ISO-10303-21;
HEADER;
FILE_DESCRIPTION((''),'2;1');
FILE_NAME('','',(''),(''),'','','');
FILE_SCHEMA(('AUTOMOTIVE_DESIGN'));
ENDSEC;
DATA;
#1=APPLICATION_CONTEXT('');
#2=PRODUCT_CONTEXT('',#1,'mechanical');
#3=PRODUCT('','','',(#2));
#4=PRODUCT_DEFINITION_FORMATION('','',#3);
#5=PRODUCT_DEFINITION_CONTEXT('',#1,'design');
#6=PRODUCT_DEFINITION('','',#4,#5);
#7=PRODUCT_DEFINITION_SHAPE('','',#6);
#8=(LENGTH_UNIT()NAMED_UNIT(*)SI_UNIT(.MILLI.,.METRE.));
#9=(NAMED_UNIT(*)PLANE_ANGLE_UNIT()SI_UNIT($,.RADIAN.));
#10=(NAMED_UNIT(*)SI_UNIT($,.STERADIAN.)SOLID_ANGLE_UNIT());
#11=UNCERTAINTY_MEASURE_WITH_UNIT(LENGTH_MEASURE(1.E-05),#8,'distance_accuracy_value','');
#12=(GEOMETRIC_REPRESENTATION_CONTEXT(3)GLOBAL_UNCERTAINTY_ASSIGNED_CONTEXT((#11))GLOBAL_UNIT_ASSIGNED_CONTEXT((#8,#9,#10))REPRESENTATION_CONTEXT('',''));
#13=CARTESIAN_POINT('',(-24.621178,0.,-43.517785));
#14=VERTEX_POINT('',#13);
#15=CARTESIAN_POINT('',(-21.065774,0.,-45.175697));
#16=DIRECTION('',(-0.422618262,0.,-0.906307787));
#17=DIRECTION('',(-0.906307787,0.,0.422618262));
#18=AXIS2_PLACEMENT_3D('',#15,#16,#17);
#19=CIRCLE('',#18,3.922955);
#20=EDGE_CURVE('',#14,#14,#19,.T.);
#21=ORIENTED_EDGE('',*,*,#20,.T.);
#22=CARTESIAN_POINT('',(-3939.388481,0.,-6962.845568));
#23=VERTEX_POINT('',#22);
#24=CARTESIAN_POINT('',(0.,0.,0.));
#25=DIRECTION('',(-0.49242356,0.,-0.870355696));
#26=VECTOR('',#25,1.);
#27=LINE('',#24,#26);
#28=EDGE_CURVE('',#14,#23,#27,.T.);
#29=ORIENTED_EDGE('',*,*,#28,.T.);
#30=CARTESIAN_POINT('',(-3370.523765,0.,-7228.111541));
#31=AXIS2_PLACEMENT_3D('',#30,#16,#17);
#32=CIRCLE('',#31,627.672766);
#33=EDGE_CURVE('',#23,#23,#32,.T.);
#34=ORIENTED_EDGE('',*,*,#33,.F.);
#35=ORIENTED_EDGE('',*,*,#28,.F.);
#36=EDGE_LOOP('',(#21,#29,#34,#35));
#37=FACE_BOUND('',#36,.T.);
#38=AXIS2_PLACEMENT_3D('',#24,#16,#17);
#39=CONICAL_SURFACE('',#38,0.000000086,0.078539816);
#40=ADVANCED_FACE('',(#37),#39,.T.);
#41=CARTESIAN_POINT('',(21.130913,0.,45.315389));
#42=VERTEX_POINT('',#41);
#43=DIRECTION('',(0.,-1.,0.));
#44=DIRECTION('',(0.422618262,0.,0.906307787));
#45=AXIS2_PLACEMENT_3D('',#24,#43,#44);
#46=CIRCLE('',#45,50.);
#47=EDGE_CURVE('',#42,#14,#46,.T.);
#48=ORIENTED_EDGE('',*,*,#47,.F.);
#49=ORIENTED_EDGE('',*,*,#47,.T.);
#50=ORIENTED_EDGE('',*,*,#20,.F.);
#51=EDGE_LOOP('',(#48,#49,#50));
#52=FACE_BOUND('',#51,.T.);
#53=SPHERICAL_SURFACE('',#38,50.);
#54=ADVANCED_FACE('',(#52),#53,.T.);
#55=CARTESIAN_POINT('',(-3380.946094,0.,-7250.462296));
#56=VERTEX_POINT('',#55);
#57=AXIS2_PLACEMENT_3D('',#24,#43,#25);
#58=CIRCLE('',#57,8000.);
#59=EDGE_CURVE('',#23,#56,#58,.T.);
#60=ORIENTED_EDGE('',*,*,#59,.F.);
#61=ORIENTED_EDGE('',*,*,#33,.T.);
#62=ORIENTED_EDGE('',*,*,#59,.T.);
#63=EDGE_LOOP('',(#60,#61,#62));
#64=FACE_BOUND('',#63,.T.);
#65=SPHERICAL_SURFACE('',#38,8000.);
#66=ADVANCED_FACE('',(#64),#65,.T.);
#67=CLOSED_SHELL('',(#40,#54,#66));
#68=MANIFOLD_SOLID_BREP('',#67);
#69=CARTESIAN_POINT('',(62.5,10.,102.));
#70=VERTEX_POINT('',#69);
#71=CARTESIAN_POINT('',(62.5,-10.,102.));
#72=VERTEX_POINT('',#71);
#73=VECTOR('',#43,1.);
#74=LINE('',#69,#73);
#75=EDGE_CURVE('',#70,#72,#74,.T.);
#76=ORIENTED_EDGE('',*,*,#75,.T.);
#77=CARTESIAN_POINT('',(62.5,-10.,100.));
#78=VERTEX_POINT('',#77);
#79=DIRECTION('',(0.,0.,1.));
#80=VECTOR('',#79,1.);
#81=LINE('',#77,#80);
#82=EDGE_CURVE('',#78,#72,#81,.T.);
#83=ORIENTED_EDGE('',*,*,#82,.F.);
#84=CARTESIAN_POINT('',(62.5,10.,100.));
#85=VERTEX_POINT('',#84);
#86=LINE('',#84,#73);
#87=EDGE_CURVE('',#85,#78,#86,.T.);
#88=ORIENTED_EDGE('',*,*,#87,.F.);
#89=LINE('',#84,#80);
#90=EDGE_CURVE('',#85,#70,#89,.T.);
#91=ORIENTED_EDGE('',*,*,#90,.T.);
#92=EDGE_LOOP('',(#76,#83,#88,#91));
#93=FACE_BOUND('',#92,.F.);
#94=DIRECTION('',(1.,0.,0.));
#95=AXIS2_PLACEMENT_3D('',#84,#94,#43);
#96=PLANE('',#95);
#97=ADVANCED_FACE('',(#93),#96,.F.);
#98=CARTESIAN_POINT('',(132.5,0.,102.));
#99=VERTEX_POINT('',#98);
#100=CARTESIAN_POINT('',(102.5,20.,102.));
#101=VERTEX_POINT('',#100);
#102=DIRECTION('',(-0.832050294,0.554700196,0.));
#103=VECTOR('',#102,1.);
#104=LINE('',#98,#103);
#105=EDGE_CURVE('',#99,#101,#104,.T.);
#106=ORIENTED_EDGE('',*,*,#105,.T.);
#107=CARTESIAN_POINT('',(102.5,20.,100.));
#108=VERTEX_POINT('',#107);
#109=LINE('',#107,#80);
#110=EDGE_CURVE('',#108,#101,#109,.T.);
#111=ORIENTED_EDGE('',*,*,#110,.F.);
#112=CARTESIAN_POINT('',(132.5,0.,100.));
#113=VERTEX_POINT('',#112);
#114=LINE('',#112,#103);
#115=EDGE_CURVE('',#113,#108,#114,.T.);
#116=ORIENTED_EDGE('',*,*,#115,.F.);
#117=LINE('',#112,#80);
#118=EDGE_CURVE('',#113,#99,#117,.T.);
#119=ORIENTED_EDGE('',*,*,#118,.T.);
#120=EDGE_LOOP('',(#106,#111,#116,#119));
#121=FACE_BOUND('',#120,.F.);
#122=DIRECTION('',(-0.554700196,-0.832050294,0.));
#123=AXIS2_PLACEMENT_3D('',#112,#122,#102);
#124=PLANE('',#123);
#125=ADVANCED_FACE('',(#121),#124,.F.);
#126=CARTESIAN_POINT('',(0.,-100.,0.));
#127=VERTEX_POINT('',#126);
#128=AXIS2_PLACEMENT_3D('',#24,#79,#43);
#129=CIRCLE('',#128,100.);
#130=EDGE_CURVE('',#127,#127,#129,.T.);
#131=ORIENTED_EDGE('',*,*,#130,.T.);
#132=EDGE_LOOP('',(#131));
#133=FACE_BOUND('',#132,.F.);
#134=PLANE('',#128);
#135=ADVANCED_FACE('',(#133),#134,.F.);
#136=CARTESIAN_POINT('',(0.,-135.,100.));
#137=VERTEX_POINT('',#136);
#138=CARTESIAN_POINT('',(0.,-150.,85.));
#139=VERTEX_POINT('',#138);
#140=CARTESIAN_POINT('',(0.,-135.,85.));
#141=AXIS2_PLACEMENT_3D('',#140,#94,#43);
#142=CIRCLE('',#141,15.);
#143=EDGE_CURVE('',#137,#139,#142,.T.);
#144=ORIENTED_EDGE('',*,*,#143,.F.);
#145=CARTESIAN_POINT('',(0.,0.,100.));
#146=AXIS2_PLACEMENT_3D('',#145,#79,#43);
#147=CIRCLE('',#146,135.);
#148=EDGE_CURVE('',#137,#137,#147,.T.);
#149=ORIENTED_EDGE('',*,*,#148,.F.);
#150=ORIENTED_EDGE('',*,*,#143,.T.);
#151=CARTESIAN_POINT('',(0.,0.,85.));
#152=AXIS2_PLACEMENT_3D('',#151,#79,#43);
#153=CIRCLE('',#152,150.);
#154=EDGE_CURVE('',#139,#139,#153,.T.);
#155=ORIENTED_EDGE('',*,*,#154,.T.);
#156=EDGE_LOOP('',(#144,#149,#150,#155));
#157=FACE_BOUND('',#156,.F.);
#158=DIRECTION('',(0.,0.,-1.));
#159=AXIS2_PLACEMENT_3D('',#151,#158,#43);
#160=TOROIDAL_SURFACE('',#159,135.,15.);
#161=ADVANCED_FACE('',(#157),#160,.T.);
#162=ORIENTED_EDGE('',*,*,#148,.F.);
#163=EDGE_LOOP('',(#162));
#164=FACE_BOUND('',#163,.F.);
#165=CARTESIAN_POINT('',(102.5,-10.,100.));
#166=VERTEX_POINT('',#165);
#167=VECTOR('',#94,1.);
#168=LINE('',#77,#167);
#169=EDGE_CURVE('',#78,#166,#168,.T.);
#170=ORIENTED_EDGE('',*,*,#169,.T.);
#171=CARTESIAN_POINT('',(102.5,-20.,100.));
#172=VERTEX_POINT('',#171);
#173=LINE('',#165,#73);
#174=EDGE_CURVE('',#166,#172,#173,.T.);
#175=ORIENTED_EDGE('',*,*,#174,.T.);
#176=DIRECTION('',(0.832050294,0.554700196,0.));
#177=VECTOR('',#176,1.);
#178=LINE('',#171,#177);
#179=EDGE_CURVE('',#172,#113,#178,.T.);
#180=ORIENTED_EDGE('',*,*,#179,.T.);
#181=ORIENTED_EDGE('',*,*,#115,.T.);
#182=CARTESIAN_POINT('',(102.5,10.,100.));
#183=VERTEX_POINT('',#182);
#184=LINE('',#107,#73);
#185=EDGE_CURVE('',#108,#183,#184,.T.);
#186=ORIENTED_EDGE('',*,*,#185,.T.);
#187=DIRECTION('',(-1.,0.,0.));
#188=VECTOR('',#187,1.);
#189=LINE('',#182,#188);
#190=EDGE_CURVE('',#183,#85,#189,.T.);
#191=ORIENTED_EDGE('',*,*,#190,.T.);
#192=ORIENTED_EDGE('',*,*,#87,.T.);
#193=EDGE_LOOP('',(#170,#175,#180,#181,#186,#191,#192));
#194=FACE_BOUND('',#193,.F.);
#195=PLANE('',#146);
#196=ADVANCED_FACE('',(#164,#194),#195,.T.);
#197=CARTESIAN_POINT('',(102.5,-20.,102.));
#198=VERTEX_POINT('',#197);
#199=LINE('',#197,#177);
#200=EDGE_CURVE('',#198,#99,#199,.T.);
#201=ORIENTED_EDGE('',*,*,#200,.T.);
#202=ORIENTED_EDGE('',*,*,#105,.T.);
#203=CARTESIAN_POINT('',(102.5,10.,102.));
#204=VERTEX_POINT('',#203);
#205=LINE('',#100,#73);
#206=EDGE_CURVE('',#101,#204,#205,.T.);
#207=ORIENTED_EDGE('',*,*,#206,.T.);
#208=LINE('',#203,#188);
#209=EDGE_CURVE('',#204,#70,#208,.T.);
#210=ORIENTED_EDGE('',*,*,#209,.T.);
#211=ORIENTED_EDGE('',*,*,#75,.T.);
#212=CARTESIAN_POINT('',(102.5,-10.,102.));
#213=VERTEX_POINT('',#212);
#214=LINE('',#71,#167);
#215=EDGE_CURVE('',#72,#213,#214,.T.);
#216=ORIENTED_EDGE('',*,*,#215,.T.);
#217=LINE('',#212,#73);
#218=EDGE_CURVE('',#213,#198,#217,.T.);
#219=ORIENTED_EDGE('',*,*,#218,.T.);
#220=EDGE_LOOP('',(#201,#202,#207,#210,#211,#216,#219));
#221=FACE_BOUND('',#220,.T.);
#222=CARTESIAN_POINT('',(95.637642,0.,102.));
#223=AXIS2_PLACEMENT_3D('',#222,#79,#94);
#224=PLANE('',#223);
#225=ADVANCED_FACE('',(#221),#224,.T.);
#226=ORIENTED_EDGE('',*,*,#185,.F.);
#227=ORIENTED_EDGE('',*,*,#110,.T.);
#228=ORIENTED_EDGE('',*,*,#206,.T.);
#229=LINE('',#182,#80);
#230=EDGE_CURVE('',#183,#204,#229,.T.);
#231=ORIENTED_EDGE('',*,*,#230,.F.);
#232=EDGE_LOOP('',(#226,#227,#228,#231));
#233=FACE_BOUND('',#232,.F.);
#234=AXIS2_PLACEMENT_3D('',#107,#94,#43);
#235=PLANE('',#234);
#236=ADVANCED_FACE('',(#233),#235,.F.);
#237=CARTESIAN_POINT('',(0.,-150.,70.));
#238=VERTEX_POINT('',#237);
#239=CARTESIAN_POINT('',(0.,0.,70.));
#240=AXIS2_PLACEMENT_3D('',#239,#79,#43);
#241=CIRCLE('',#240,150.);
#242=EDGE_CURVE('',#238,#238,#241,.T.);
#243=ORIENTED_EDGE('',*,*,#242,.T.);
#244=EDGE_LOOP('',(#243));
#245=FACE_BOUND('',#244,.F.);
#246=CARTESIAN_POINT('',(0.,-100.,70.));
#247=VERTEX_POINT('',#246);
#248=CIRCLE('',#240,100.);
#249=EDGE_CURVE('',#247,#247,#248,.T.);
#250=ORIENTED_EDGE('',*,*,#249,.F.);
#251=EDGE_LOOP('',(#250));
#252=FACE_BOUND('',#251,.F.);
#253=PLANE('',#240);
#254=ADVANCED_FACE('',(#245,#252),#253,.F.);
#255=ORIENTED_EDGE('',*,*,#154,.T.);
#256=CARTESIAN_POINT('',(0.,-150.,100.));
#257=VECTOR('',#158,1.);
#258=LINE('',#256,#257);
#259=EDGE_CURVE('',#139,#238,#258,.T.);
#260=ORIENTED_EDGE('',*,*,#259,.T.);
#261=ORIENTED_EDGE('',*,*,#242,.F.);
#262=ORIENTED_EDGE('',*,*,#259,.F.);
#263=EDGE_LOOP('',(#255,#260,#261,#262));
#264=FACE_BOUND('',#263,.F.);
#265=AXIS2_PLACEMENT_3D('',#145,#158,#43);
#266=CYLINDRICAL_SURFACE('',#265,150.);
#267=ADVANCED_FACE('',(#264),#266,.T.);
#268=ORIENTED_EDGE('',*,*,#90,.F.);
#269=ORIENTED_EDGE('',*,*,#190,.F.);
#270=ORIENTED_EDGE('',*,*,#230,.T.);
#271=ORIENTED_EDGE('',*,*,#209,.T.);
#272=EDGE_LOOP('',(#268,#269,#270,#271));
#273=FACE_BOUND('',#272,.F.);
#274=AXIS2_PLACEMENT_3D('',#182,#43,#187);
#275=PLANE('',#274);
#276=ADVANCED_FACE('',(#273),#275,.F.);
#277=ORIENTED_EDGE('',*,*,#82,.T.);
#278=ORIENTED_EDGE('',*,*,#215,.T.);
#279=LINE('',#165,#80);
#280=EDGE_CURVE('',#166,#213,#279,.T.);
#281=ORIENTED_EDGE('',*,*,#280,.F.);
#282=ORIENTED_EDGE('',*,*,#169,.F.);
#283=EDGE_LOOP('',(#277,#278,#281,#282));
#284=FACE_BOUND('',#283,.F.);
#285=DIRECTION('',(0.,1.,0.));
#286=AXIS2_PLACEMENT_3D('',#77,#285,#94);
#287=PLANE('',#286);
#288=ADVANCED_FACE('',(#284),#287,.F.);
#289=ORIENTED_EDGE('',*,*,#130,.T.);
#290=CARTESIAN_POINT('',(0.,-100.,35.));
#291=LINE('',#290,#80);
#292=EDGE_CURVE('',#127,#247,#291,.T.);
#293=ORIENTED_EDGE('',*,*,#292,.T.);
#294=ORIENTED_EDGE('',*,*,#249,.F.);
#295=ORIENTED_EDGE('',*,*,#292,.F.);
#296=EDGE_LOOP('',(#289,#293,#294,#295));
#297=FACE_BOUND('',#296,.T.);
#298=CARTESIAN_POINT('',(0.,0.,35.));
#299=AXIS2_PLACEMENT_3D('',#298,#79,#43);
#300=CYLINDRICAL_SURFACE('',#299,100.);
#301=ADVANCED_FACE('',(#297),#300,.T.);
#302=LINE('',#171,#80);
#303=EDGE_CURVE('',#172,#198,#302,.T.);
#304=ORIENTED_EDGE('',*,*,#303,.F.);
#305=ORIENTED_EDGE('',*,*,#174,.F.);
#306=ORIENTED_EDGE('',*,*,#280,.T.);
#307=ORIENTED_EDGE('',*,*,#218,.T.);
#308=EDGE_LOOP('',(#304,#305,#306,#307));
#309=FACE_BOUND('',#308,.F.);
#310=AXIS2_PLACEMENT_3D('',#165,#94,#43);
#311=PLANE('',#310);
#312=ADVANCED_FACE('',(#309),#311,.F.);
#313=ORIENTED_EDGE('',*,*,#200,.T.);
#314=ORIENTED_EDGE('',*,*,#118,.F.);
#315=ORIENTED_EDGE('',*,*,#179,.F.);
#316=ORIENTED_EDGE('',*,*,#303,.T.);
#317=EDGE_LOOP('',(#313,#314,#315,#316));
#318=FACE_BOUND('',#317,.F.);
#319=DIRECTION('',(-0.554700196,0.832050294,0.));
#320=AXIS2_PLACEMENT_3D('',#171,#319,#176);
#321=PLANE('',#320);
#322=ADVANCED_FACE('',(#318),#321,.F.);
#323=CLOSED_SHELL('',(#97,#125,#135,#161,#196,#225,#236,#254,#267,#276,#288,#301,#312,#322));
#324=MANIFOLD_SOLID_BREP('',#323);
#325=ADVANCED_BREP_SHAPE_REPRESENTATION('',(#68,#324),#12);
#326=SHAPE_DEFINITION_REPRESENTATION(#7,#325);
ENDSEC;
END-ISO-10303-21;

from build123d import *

# Parameters (mm, degrees)
F2_W     = 100
F2_H     = 70
F4_R     = 15
F7_DEPTH = 2


# Not quite as in the source:
# - a feature names something its author has since deleted; it is built from what else it names


with BuildPart() as f1:
    # F0 (on Front) → F1 (revolve)
    with BuildSketch(Plane.XZ):
        with BuildLine():
            Line((-3380.9460939256, -7250.4622962932), (0, 0))
            Line((0, 0), (-24.6211780052, -43.517784797))
            Line((-24.6211780052, -43.517784797), (-1969.6942404139, -3481.4227837596))
            Line((-1969.6942404139, -3481.4227837596), (-2462.1178005173, -4351.7784796995))
            Line((-2462.1178005173, -4351.7784796995), (-3446.9649207243, -6092.4898715793))
            Line((-3446.9649207243, -6092.4898715793), (-3939.3884808277, -6962.8455675192))
            ThreePointArc((-3939.3884808277, -6962.8455675192), (-3662.9913209357, -7112.1371318859), (-3380.9460939256, -7250.4622962932))
        make_face()
        with BuildLine():
            Line((-24.6211780052, -43.517784797), (0, 0))
            Line((0, 0), (21.130913087, 45.3153893518))
            ThreePointArc((21.130913087, 45.3153893518), (-44.4508570743, 22.8936957558), (-24.6211780052, -43.517784797))
        make_face()
    revolve(axis=Axis((-1690.4730469628, 0, -3625.2311481466), (-0.4226182617, 0, -0.906307787)))


with BuildPart() as f3:
    # F2 (on Right) → F3 (revolve)
    with BuildSketch(Plane.YZ):
        with Locations((-50, 35)):
            Rectangle(F2_W, F2_H)
        Polygon((-100, 70), (0, 70), (0, 100), (-150, 100), (-150, 70), align=None)
    revolve(axis=Axis((0, 0, 35), (0, 0, 1)))

    # F4
    f4_edges = [f3.edges().sort_by_distance(p)[0] for p in [
        (0, 150, 100),
    ]]
    fillet(f4_edges, radius=F4_R)

    # F6 (on offset) → F7 (join)
    with BuildSketch(Plane.XY.offset(100)):
        Polygon((102.5, -20), (132.5, 0), (102.5, 20), (102.5, 10), (62.5, 10), (62.5, 0), (62.5, -10), (102.5, -10), align=None)
    extrude(amount=F7_DEPTH)


solid = Compound([f1.part, f3.part])
